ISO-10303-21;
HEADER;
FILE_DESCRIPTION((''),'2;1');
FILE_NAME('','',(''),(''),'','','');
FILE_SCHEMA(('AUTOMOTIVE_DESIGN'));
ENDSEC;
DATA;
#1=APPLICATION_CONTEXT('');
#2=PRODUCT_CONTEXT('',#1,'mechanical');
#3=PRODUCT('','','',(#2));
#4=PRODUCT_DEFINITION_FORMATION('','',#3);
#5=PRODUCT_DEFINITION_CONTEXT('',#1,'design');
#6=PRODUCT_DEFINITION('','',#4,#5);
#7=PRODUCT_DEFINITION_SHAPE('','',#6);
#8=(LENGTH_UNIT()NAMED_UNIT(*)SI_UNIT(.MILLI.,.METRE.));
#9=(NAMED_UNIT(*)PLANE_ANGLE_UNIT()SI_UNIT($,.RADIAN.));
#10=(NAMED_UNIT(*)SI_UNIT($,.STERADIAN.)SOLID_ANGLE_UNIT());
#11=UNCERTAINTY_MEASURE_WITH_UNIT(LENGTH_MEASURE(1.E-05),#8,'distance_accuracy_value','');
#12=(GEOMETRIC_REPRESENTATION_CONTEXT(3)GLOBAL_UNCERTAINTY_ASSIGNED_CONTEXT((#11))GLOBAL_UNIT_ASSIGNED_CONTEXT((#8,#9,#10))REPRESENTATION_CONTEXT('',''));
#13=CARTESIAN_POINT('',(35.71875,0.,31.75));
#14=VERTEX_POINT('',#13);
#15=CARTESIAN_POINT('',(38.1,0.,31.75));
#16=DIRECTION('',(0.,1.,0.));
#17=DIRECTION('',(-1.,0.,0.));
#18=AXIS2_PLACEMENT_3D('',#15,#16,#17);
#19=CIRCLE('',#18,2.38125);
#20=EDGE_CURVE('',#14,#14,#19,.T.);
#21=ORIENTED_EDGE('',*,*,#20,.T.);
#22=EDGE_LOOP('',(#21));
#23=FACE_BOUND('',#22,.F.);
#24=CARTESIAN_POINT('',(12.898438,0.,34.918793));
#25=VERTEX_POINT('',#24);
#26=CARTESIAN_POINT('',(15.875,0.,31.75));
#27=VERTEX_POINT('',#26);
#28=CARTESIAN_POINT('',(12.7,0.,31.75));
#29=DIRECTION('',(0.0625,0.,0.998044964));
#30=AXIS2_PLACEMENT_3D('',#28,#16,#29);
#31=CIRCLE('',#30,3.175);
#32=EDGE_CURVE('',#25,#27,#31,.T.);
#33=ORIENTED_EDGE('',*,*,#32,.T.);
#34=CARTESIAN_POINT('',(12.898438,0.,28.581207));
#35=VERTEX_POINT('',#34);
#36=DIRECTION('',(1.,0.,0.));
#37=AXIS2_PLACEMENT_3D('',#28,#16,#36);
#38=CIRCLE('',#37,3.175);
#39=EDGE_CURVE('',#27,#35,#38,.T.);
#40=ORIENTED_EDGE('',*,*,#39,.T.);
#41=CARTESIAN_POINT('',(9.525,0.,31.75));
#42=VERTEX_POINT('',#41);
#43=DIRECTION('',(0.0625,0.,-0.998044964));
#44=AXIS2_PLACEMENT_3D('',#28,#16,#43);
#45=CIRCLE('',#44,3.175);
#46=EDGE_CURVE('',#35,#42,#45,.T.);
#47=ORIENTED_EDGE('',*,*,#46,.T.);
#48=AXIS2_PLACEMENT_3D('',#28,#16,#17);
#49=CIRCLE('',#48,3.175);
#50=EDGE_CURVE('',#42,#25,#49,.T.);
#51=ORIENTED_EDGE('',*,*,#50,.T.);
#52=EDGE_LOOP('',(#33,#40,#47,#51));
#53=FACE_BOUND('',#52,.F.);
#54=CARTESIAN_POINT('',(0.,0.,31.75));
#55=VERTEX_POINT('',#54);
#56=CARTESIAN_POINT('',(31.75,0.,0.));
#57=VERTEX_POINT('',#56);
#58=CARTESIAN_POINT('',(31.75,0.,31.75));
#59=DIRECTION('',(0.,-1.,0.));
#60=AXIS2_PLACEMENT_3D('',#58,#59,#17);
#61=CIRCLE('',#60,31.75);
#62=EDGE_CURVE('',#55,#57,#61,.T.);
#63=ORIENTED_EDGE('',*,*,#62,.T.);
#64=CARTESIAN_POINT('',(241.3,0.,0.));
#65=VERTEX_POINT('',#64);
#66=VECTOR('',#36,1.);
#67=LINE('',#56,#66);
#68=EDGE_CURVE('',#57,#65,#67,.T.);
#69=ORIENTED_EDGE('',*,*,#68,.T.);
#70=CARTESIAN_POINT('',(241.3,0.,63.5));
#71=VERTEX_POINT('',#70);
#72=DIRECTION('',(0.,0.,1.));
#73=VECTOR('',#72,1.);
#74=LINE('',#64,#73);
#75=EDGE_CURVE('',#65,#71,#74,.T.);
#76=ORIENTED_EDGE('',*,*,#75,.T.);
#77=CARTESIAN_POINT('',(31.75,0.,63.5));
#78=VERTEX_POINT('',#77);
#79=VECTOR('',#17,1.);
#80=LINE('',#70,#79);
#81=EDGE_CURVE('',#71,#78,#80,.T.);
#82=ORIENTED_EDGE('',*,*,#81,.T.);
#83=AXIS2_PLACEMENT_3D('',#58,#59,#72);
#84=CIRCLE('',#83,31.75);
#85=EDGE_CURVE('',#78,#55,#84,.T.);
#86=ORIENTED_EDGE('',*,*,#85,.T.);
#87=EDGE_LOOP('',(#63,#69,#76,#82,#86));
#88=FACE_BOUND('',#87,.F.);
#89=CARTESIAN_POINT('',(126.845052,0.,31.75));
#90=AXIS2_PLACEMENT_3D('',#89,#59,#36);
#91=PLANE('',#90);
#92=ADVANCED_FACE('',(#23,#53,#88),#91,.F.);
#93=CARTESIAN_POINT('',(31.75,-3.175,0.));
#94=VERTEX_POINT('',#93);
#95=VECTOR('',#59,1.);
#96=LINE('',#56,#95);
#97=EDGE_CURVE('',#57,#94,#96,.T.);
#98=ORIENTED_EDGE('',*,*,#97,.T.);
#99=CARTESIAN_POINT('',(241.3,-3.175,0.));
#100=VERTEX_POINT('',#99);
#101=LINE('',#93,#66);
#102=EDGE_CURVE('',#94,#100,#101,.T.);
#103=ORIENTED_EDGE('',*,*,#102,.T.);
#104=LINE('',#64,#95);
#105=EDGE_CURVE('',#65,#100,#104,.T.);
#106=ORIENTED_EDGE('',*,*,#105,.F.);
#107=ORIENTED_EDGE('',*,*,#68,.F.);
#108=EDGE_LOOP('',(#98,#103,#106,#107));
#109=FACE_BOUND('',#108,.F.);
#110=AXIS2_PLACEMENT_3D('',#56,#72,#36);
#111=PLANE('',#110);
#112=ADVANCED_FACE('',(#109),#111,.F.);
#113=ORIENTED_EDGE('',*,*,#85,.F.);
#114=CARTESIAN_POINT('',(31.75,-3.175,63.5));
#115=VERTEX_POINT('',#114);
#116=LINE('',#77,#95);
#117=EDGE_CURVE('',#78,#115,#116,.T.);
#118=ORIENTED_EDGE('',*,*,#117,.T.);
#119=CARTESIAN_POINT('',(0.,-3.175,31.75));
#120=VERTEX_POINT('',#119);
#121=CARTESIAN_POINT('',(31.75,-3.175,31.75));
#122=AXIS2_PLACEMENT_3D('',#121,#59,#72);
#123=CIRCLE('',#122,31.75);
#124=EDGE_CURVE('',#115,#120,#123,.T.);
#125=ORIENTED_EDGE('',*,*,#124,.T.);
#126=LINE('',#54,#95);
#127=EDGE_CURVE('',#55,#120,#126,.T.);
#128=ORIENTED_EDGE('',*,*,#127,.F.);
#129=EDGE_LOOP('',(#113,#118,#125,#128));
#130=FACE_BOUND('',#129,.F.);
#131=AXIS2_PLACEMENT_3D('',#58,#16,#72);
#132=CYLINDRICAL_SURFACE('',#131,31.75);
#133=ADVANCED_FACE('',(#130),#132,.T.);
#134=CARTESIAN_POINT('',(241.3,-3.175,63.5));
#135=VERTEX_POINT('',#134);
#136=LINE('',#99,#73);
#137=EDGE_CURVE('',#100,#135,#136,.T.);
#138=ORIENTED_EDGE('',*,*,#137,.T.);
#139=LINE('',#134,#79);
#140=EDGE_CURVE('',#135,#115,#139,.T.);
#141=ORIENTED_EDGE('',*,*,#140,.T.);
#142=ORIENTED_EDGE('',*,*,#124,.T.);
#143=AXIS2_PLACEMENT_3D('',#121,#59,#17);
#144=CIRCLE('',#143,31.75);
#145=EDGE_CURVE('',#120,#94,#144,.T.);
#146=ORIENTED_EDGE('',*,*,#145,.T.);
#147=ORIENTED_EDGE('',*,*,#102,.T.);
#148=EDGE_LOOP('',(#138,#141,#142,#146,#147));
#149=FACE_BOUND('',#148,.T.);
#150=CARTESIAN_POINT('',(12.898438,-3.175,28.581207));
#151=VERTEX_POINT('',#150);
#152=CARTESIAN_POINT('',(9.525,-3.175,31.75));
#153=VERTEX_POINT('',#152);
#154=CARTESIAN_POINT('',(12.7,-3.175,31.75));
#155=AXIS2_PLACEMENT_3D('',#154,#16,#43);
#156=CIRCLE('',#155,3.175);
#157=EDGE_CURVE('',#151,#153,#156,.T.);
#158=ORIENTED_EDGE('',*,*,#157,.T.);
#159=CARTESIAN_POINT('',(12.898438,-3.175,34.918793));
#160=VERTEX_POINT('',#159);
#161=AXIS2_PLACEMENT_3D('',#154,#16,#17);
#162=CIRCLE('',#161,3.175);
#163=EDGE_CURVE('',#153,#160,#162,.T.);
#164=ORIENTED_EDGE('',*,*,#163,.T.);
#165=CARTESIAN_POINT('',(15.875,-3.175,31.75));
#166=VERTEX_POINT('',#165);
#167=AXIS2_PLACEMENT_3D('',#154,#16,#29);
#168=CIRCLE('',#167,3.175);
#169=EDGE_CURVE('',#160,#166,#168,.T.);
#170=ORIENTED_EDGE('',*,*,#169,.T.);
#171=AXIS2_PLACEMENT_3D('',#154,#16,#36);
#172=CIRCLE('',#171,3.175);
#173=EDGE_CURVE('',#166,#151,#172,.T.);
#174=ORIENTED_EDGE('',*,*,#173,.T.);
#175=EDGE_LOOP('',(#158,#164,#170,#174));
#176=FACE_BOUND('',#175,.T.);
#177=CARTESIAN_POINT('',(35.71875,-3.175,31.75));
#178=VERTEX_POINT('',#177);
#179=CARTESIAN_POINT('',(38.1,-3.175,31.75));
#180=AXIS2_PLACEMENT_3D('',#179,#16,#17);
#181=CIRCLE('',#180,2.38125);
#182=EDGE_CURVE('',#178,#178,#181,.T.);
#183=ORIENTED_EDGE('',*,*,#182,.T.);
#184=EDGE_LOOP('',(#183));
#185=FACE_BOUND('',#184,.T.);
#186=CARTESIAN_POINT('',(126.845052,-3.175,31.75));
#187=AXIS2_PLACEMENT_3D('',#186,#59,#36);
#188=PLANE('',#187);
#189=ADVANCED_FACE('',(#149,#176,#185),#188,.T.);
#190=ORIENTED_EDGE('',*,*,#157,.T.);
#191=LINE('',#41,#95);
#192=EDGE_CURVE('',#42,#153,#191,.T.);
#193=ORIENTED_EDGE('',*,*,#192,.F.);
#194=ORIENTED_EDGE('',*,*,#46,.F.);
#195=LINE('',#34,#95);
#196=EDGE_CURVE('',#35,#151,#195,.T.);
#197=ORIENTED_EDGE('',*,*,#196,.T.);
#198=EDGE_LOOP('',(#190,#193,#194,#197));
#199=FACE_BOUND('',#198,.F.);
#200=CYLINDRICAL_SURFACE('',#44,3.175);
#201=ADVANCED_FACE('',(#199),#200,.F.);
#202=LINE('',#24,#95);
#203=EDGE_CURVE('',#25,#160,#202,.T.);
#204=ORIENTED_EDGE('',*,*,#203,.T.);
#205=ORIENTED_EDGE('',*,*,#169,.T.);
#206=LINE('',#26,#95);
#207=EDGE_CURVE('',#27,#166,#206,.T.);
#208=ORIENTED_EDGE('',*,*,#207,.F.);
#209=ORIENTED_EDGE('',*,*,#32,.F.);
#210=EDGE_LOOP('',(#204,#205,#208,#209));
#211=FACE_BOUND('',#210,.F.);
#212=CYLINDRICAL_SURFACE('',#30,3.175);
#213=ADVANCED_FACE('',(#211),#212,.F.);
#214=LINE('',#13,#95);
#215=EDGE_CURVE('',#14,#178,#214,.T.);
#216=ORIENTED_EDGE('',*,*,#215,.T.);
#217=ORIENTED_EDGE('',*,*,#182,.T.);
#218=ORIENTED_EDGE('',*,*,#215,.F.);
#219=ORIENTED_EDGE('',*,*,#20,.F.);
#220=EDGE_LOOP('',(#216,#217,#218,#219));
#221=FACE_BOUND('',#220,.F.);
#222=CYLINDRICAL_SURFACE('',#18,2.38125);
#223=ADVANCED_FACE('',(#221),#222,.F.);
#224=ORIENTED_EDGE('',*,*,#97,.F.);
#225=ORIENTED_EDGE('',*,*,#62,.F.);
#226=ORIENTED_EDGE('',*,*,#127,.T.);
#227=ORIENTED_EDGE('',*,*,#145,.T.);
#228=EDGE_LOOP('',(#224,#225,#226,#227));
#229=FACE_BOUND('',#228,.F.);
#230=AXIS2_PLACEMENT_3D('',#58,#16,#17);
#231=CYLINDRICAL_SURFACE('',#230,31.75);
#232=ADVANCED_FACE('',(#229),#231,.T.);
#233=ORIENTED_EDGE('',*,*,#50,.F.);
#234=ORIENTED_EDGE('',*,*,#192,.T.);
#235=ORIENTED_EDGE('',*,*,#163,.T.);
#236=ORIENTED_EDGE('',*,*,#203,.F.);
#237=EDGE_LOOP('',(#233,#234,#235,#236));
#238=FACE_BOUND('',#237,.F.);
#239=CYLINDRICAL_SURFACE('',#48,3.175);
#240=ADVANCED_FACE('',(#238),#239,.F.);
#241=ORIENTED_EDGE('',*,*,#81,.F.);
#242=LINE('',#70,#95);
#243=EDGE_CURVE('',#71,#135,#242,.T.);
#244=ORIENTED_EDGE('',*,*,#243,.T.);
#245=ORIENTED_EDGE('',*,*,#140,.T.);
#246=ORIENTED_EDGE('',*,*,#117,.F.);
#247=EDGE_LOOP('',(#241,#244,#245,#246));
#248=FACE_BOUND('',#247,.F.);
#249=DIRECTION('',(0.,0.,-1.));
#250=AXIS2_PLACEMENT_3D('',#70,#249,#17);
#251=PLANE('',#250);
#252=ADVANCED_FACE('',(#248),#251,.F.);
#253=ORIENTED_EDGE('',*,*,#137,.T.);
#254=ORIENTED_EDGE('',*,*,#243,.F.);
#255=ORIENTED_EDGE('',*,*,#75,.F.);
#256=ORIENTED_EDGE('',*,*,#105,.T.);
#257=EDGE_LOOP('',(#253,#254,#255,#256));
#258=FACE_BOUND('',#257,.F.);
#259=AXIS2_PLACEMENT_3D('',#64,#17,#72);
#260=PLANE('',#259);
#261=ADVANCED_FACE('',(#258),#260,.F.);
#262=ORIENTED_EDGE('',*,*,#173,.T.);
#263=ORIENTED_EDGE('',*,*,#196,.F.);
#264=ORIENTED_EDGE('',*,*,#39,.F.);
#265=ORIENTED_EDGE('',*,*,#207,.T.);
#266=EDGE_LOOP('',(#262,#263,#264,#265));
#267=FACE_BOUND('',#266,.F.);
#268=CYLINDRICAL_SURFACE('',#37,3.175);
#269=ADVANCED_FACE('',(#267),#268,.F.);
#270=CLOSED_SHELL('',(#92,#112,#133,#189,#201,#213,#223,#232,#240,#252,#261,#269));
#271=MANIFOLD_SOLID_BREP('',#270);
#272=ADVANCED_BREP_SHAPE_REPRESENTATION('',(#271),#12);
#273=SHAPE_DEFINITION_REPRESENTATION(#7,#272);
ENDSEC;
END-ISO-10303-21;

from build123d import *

# Parameters (mm, degrees)
F1_DEPTH = 3.175


# Not quite as in the source:
# - a feature names something its author has since deleted; it is built from what else it names


with BuildPart() as f1:
    # F0 (on Front) → F1 (new body)
    with BuildSketch(Plane.XZ):
        with BuildLine():
            ThreePointArc((0, 31.75), (9.2993596973, 9.2993596973), (31.75, 0))
            Line((31.75, 0), (241.3, 0))
            Line((241.3, 0), (241.3, 63.5))
            Line((241.3, 63.5), (31.75, 63.5))
            ThreePointArc((31.75, 63.5), (9.2993596973, 54.2006403027), (0, 31.75))
        make_face()
        with BuildLine():
            ThreePointArc((12.8984375, 28.5812072396), (10.5262260999, 29.4358409667), (9.525, 31.75))
            ThreePointArc((9.525, 31.75), (10.5262260999, 34.0641590333), (12.8984375, 34.9187927604))
            ThreePointArc((12.8984375, 34.9187927604), (39.6875, 57.1003420835), (63.5, 31.75))
            ThreePointArc((63.5, 31.75), (39.6875, 6.3996579165), (12.8984375, 28.5812072396))
        make_face(mode=Mode.SUBTRACT)
        with BuildLine():
            ThreePointArc((63.5, 31.75), (39.6875, 57.1003420835), (12.8984375, 34.9187927604))
            ThreePointArc((12.8984375, 34.9187927604), (15.0141590333, 33.9237739001), (15.875, 31.75))
            ThreePointArc((15.875, 31.75), (15.0141590333, 29.5762260999), (12.8984375, 28.5812072396))
            ThreePointArc((12.8984375, 28.5812072396), (39.6875, 6.3996579165), (63.5, 31.75))
        make_face()
        with BuildLine():
            ThreePointArc((40.48125, 31.75), (38.1, 29.36875), (35.71875, 31.75))
            ThreePointArc((35.71875, 31.75), (38.1, 34.13125), (40.48125, 31.75))
        make_face(mode=Mode.SUBTRACT)
    extrude(amount=F1_DEPTH)


solid = f1.part
